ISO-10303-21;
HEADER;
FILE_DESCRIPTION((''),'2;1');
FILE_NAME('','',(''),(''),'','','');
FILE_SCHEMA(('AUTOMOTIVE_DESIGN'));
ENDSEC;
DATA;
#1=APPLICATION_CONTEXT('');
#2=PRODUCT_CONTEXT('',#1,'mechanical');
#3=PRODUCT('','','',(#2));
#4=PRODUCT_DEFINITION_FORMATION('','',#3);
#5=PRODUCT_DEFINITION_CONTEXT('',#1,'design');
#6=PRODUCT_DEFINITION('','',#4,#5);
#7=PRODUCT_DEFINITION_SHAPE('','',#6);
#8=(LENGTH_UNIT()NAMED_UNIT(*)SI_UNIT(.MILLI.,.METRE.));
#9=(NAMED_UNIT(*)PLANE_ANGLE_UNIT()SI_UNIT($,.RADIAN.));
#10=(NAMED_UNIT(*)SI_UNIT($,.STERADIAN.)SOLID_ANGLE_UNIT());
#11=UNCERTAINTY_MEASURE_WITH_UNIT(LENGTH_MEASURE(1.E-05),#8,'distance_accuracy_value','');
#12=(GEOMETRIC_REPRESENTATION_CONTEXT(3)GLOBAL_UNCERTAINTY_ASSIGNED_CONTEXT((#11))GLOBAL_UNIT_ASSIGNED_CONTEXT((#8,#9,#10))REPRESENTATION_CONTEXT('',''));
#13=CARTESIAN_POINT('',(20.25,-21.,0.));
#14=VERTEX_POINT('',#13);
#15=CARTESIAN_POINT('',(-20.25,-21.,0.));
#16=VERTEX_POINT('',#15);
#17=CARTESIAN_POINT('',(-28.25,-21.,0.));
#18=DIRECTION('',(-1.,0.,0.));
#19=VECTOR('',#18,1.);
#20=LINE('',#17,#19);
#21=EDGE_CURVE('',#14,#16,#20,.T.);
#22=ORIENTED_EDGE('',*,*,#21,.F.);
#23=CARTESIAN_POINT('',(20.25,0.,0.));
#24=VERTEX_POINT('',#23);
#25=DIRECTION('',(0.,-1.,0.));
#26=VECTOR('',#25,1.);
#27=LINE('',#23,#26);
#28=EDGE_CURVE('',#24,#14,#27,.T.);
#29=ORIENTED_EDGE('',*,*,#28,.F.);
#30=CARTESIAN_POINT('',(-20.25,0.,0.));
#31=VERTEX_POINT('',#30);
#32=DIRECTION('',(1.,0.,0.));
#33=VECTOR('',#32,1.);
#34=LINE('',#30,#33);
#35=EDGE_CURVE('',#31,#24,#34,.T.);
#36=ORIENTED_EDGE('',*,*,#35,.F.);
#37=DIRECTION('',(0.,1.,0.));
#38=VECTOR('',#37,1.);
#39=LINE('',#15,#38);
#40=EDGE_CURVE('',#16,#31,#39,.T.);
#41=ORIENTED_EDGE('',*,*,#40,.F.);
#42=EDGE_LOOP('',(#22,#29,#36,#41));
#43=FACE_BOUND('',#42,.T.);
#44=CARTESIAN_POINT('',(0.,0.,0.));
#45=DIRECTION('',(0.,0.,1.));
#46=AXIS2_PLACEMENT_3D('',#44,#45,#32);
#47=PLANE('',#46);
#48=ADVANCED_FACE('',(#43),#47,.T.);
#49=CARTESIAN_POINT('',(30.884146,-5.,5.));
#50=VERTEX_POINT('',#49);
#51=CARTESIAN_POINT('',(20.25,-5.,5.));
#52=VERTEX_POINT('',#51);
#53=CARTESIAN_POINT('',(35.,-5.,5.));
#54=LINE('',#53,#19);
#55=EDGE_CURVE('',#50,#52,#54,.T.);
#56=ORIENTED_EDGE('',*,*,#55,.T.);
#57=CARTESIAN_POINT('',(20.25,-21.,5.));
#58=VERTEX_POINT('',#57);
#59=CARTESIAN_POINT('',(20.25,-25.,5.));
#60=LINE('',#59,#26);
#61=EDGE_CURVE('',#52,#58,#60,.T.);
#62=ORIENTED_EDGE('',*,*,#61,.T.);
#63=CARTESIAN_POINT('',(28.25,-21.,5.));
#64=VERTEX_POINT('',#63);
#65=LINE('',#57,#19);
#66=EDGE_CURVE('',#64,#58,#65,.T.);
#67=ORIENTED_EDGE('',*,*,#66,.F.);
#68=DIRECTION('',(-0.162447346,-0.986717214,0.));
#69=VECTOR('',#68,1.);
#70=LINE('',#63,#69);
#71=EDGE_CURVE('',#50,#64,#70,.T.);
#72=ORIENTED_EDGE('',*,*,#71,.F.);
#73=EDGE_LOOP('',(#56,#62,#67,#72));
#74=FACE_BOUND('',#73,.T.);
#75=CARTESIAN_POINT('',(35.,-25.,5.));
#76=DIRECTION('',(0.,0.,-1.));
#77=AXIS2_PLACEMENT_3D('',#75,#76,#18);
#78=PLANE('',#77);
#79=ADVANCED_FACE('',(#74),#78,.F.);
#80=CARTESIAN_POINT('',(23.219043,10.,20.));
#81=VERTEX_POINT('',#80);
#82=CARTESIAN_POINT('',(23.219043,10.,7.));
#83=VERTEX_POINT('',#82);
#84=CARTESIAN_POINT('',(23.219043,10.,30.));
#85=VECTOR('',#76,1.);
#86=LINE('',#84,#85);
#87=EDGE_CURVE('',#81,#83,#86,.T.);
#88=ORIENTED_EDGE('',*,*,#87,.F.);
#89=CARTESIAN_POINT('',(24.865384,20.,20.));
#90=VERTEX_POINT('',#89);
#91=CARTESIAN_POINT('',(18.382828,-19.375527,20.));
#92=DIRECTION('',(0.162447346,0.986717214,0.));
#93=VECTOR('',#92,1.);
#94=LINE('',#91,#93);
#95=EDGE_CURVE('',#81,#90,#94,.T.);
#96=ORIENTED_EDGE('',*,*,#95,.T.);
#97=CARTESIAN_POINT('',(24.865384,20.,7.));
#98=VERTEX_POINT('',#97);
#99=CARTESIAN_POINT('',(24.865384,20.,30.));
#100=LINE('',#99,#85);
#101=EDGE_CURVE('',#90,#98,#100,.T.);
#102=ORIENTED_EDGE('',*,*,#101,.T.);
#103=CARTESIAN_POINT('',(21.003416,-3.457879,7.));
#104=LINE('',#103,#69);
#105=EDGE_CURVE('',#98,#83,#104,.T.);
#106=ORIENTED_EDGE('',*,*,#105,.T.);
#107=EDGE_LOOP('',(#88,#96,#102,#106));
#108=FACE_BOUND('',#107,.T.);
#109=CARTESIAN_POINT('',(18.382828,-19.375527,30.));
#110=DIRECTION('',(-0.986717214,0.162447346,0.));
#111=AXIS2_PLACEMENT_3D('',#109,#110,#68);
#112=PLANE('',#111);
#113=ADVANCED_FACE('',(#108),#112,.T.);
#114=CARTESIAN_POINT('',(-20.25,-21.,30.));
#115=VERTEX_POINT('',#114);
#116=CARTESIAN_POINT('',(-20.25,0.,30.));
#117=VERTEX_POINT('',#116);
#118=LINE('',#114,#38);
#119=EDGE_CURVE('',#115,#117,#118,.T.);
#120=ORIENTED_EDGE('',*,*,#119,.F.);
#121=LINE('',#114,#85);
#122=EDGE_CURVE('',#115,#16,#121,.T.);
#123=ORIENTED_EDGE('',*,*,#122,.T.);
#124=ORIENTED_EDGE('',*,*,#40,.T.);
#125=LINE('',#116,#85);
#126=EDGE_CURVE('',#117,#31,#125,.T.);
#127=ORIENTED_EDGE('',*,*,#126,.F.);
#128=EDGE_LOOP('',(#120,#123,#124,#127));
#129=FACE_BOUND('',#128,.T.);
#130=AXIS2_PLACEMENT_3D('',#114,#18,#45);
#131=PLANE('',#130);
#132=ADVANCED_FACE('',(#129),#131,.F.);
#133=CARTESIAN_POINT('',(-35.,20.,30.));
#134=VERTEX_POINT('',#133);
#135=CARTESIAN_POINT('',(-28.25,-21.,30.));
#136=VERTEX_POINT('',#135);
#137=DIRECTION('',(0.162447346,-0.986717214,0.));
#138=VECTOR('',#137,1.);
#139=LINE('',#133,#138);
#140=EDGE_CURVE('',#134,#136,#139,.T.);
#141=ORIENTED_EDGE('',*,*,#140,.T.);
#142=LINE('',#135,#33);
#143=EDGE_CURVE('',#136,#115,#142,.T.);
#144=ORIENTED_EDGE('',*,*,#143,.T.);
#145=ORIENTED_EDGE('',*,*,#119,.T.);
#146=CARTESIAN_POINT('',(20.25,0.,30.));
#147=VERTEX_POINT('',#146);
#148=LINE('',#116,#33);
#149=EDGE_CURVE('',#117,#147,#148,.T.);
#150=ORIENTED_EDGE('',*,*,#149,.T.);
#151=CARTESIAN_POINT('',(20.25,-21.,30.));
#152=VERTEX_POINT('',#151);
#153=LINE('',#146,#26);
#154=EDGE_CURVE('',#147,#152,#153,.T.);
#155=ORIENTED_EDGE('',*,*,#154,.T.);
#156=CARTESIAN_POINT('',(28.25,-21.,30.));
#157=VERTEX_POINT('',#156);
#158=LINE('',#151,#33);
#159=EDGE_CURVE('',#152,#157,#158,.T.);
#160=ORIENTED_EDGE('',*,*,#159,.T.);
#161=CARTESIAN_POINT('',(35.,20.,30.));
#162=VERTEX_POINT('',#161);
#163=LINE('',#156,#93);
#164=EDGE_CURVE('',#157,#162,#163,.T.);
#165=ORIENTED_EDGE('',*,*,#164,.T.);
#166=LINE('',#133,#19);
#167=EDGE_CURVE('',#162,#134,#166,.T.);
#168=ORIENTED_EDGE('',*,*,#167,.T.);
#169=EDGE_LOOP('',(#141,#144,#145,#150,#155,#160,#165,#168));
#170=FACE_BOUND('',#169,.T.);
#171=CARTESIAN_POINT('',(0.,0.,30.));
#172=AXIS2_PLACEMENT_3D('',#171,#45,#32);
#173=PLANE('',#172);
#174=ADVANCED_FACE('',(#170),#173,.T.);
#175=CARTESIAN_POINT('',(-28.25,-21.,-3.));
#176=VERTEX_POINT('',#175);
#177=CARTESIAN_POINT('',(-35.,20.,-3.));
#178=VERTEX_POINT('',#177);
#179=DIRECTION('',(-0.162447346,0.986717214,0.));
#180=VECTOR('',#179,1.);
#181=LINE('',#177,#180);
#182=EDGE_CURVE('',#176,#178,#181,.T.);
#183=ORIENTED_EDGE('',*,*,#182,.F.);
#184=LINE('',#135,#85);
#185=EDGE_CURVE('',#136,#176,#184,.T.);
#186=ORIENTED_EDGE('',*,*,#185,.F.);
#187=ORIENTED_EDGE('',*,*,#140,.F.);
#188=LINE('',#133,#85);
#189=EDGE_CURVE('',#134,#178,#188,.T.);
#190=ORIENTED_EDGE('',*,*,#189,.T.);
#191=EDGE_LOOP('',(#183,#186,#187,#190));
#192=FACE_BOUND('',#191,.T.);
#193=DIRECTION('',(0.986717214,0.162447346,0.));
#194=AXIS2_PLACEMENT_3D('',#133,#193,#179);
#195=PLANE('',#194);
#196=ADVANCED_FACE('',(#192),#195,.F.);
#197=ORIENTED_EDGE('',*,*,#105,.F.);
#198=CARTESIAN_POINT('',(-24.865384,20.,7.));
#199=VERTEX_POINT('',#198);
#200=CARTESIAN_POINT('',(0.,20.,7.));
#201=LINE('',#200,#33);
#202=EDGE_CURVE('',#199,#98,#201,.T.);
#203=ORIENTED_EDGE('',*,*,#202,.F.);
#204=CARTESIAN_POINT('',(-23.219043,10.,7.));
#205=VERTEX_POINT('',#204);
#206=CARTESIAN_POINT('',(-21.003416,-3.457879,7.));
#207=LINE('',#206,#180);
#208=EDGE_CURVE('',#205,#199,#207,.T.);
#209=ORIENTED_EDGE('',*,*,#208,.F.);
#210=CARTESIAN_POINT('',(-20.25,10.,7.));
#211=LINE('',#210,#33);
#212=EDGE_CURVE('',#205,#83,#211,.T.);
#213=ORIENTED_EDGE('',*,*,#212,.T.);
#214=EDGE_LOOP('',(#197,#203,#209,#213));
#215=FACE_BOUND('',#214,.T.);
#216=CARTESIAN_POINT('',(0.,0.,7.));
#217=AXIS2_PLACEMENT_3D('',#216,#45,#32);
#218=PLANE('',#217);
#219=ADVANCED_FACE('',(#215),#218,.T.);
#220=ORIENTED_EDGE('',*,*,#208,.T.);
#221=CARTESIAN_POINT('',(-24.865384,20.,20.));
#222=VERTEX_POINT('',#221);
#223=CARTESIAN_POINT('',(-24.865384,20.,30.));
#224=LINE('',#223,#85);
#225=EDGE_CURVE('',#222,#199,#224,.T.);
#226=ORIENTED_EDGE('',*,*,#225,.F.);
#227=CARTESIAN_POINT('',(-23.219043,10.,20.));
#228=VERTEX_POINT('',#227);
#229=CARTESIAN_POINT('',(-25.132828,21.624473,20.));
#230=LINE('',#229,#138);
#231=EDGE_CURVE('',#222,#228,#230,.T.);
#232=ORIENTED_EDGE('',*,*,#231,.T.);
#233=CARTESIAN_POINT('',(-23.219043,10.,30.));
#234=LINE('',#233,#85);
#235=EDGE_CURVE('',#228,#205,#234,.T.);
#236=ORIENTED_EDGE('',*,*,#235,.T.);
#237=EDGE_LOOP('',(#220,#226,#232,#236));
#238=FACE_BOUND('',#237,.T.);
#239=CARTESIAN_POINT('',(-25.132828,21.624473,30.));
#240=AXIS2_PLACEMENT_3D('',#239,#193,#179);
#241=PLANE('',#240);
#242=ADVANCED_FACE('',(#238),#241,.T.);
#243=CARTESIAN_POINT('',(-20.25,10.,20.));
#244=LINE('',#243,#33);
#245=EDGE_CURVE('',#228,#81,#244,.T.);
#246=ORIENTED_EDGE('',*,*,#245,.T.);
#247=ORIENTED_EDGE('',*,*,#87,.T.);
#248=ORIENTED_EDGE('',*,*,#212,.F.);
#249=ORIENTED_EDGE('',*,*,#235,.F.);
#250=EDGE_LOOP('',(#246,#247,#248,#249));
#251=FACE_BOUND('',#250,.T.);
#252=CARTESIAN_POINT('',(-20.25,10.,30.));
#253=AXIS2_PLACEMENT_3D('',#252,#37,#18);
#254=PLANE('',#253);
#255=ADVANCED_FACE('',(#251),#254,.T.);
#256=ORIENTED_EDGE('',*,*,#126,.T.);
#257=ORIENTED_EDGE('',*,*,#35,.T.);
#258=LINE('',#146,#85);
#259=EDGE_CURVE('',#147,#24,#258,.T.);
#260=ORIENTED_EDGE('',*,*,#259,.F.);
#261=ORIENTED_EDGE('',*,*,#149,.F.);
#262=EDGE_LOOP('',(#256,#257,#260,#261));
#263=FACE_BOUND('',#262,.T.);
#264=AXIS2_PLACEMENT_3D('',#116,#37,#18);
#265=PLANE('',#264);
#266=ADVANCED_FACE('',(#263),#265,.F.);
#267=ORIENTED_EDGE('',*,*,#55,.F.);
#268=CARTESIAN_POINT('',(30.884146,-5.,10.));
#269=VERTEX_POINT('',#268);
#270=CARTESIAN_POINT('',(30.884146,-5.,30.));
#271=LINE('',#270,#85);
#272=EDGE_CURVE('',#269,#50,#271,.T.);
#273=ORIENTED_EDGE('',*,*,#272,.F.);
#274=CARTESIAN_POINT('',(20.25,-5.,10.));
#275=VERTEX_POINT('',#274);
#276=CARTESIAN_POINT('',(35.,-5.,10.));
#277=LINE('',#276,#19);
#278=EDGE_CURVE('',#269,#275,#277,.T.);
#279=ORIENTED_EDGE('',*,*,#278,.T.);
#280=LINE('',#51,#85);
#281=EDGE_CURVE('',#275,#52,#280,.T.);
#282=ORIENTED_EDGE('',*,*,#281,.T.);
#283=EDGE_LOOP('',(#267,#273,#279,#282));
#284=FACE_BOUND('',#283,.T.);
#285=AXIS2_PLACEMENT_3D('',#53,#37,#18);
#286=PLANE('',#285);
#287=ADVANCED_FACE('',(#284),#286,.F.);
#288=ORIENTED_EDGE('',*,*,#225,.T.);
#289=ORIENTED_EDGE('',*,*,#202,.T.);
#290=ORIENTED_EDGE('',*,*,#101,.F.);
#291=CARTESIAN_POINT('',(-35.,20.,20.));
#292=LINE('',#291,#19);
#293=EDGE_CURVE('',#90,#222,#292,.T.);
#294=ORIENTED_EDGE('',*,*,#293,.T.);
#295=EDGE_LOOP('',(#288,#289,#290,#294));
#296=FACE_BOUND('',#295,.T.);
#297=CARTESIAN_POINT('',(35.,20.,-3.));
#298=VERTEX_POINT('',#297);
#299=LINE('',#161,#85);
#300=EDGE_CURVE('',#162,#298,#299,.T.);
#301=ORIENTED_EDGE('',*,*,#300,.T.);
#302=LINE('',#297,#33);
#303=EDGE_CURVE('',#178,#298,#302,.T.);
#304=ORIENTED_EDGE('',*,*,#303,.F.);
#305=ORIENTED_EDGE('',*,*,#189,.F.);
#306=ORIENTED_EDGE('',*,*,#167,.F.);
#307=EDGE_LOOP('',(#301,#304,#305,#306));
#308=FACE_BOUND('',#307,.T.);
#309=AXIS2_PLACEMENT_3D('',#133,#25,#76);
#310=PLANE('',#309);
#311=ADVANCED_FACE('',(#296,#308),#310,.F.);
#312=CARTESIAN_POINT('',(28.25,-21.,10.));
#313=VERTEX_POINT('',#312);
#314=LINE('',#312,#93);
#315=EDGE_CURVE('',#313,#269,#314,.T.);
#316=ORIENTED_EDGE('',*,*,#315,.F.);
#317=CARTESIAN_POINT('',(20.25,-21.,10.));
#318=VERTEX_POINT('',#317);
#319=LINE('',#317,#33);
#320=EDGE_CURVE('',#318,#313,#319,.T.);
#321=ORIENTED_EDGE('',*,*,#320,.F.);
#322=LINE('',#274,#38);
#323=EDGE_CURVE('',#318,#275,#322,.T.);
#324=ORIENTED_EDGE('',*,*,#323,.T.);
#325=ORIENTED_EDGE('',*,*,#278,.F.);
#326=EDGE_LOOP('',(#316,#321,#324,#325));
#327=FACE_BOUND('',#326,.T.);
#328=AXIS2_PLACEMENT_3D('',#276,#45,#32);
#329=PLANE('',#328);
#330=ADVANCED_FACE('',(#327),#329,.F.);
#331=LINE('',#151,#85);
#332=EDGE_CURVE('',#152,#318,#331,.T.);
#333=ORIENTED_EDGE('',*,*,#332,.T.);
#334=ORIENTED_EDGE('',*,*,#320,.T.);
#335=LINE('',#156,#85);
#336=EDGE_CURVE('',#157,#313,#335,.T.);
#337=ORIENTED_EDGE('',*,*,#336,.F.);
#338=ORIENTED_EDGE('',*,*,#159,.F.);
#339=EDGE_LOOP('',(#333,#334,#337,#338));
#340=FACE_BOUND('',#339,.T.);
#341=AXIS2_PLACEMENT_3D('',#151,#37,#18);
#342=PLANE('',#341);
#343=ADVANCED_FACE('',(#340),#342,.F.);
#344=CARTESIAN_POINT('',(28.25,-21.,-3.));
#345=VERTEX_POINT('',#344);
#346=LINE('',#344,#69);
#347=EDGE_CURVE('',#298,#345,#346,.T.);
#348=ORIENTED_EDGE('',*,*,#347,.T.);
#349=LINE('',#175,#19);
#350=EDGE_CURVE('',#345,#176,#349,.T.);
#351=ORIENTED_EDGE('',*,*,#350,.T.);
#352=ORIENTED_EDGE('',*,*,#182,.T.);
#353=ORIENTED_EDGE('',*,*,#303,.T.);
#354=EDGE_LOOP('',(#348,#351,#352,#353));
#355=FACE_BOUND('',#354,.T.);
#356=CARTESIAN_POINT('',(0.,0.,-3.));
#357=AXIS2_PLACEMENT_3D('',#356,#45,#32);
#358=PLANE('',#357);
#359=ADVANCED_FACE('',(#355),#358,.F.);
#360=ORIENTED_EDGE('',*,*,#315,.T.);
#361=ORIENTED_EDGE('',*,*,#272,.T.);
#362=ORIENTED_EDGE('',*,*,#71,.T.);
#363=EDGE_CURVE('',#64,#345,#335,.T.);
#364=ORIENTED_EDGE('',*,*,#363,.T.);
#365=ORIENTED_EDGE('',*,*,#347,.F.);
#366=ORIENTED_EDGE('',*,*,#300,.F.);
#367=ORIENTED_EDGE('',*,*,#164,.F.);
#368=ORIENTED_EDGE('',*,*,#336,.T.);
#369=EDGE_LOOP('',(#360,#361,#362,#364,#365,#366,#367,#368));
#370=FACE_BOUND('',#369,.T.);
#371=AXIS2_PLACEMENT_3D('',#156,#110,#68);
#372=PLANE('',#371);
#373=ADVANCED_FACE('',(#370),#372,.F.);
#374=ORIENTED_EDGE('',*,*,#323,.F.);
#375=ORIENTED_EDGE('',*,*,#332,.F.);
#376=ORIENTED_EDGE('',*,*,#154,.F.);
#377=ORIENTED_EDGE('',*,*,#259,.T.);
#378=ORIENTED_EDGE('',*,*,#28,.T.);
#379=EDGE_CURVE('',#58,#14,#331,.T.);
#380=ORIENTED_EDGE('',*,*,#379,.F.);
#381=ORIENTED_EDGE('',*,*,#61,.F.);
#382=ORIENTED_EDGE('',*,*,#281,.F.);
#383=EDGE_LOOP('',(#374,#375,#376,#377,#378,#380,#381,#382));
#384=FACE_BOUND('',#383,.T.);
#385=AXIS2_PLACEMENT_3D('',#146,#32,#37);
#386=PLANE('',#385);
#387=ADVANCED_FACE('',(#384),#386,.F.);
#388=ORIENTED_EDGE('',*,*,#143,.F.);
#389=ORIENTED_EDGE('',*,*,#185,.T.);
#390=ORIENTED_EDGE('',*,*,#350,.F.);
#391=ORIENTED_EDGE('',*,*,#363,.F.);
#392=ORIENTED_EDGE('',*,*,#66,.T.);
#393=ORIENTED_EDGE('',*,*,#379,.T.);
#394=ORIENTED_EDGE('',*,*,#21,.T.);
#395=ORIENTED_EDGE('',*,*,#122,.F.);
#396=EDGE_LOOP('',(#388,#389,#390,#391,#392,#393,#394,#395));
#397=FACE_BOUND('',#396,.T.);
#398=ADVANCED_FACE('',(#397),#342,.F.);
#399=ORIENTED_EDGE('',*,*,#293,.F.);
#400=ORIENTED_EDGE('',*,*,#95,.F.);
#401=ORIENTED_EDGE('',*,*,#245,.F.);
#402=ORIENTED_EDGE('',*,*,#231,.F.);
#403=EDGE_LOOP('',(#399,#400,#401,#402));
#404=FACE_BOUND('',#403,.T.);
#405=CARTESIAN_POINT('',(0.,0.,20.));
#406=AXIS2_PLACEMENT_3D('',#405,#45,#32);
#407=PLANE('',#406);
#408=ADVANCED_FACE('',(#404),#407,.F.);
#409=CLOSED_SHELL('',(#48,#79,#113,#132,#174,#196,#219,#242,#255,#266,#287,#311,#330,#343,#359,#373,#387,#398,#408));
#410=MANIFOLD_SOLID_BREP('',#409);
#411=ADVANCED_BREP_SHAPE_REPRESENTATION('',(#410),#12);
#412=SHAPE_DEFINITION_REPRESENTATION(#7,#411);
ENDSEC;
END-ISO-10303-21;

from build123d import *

# Parameters (mm, degrees)
RESSALTO_EXTRUS_O1_DEPTH = 30
RESSALTO_EXTRUS_O2_DEPTH = 3
CASCA1_START             = 7
CASCA1_DEPTH             = 13
ESBO_O3_W                = 5
ESBO_O3_H                = 20
CORTE_EXTRUS_O1_DEPTH    = 67.283953563


# Read off the part's stored shape, not the designer's step: Casca1
with BuildPart() as part:
    # Esboço1 → Ressalto-extrusão1 (new body)
    with BuildSketch(Plane.XY):
        Polygon((-35, 20), (35, 20), (28.25, -21), (20.25, -21), (20.25, 0), (-20.25, 0), (-20.25, -21), (-28.25, -21), align=None)
    extrude(amount=RESSALTO_EXTRUS_O1_DEPTH)

    # Esboço2 → Ressalto-extrusão2 (add)
    with BuildSketch(Plane(origin=(0, 0, 0), x_dir=(-1, 0, 0), z_dir=(0, 0, -1))):
        Polygon((-35, 20), (35, 20), (28.25, -21), (-28.25, -21), align=None)
    extrude(amount=RESSALTO_EXTRUS_O2_DEPTH)

    # Casca1 outline → Casca1 (cut)
    with BuildSketch(Plane.XY.offset(CASCA1_START)):
        Polygon((-24.865384062, 20), (-23.219042598, 10), (23.219042598, 10), (24.865384062, 20), align=None)
    extrude(amount=CASCA1_DEPTH, mode=Mode.SUBTRACT)

    # Esboço3 → Corte-extrusão1 (cut, through all)
    with BuildSketch(Plane.ZY.offset(-20.25)):
        with Locations((7.5, -15)):
            Rectangle(ESBO_O3_W, ESBO_O3_H)
    extrude(amount=-CORTE_EXTRUS_O1_DEPTH, mode=Mode.SUBTRACT)


solid = part.part
